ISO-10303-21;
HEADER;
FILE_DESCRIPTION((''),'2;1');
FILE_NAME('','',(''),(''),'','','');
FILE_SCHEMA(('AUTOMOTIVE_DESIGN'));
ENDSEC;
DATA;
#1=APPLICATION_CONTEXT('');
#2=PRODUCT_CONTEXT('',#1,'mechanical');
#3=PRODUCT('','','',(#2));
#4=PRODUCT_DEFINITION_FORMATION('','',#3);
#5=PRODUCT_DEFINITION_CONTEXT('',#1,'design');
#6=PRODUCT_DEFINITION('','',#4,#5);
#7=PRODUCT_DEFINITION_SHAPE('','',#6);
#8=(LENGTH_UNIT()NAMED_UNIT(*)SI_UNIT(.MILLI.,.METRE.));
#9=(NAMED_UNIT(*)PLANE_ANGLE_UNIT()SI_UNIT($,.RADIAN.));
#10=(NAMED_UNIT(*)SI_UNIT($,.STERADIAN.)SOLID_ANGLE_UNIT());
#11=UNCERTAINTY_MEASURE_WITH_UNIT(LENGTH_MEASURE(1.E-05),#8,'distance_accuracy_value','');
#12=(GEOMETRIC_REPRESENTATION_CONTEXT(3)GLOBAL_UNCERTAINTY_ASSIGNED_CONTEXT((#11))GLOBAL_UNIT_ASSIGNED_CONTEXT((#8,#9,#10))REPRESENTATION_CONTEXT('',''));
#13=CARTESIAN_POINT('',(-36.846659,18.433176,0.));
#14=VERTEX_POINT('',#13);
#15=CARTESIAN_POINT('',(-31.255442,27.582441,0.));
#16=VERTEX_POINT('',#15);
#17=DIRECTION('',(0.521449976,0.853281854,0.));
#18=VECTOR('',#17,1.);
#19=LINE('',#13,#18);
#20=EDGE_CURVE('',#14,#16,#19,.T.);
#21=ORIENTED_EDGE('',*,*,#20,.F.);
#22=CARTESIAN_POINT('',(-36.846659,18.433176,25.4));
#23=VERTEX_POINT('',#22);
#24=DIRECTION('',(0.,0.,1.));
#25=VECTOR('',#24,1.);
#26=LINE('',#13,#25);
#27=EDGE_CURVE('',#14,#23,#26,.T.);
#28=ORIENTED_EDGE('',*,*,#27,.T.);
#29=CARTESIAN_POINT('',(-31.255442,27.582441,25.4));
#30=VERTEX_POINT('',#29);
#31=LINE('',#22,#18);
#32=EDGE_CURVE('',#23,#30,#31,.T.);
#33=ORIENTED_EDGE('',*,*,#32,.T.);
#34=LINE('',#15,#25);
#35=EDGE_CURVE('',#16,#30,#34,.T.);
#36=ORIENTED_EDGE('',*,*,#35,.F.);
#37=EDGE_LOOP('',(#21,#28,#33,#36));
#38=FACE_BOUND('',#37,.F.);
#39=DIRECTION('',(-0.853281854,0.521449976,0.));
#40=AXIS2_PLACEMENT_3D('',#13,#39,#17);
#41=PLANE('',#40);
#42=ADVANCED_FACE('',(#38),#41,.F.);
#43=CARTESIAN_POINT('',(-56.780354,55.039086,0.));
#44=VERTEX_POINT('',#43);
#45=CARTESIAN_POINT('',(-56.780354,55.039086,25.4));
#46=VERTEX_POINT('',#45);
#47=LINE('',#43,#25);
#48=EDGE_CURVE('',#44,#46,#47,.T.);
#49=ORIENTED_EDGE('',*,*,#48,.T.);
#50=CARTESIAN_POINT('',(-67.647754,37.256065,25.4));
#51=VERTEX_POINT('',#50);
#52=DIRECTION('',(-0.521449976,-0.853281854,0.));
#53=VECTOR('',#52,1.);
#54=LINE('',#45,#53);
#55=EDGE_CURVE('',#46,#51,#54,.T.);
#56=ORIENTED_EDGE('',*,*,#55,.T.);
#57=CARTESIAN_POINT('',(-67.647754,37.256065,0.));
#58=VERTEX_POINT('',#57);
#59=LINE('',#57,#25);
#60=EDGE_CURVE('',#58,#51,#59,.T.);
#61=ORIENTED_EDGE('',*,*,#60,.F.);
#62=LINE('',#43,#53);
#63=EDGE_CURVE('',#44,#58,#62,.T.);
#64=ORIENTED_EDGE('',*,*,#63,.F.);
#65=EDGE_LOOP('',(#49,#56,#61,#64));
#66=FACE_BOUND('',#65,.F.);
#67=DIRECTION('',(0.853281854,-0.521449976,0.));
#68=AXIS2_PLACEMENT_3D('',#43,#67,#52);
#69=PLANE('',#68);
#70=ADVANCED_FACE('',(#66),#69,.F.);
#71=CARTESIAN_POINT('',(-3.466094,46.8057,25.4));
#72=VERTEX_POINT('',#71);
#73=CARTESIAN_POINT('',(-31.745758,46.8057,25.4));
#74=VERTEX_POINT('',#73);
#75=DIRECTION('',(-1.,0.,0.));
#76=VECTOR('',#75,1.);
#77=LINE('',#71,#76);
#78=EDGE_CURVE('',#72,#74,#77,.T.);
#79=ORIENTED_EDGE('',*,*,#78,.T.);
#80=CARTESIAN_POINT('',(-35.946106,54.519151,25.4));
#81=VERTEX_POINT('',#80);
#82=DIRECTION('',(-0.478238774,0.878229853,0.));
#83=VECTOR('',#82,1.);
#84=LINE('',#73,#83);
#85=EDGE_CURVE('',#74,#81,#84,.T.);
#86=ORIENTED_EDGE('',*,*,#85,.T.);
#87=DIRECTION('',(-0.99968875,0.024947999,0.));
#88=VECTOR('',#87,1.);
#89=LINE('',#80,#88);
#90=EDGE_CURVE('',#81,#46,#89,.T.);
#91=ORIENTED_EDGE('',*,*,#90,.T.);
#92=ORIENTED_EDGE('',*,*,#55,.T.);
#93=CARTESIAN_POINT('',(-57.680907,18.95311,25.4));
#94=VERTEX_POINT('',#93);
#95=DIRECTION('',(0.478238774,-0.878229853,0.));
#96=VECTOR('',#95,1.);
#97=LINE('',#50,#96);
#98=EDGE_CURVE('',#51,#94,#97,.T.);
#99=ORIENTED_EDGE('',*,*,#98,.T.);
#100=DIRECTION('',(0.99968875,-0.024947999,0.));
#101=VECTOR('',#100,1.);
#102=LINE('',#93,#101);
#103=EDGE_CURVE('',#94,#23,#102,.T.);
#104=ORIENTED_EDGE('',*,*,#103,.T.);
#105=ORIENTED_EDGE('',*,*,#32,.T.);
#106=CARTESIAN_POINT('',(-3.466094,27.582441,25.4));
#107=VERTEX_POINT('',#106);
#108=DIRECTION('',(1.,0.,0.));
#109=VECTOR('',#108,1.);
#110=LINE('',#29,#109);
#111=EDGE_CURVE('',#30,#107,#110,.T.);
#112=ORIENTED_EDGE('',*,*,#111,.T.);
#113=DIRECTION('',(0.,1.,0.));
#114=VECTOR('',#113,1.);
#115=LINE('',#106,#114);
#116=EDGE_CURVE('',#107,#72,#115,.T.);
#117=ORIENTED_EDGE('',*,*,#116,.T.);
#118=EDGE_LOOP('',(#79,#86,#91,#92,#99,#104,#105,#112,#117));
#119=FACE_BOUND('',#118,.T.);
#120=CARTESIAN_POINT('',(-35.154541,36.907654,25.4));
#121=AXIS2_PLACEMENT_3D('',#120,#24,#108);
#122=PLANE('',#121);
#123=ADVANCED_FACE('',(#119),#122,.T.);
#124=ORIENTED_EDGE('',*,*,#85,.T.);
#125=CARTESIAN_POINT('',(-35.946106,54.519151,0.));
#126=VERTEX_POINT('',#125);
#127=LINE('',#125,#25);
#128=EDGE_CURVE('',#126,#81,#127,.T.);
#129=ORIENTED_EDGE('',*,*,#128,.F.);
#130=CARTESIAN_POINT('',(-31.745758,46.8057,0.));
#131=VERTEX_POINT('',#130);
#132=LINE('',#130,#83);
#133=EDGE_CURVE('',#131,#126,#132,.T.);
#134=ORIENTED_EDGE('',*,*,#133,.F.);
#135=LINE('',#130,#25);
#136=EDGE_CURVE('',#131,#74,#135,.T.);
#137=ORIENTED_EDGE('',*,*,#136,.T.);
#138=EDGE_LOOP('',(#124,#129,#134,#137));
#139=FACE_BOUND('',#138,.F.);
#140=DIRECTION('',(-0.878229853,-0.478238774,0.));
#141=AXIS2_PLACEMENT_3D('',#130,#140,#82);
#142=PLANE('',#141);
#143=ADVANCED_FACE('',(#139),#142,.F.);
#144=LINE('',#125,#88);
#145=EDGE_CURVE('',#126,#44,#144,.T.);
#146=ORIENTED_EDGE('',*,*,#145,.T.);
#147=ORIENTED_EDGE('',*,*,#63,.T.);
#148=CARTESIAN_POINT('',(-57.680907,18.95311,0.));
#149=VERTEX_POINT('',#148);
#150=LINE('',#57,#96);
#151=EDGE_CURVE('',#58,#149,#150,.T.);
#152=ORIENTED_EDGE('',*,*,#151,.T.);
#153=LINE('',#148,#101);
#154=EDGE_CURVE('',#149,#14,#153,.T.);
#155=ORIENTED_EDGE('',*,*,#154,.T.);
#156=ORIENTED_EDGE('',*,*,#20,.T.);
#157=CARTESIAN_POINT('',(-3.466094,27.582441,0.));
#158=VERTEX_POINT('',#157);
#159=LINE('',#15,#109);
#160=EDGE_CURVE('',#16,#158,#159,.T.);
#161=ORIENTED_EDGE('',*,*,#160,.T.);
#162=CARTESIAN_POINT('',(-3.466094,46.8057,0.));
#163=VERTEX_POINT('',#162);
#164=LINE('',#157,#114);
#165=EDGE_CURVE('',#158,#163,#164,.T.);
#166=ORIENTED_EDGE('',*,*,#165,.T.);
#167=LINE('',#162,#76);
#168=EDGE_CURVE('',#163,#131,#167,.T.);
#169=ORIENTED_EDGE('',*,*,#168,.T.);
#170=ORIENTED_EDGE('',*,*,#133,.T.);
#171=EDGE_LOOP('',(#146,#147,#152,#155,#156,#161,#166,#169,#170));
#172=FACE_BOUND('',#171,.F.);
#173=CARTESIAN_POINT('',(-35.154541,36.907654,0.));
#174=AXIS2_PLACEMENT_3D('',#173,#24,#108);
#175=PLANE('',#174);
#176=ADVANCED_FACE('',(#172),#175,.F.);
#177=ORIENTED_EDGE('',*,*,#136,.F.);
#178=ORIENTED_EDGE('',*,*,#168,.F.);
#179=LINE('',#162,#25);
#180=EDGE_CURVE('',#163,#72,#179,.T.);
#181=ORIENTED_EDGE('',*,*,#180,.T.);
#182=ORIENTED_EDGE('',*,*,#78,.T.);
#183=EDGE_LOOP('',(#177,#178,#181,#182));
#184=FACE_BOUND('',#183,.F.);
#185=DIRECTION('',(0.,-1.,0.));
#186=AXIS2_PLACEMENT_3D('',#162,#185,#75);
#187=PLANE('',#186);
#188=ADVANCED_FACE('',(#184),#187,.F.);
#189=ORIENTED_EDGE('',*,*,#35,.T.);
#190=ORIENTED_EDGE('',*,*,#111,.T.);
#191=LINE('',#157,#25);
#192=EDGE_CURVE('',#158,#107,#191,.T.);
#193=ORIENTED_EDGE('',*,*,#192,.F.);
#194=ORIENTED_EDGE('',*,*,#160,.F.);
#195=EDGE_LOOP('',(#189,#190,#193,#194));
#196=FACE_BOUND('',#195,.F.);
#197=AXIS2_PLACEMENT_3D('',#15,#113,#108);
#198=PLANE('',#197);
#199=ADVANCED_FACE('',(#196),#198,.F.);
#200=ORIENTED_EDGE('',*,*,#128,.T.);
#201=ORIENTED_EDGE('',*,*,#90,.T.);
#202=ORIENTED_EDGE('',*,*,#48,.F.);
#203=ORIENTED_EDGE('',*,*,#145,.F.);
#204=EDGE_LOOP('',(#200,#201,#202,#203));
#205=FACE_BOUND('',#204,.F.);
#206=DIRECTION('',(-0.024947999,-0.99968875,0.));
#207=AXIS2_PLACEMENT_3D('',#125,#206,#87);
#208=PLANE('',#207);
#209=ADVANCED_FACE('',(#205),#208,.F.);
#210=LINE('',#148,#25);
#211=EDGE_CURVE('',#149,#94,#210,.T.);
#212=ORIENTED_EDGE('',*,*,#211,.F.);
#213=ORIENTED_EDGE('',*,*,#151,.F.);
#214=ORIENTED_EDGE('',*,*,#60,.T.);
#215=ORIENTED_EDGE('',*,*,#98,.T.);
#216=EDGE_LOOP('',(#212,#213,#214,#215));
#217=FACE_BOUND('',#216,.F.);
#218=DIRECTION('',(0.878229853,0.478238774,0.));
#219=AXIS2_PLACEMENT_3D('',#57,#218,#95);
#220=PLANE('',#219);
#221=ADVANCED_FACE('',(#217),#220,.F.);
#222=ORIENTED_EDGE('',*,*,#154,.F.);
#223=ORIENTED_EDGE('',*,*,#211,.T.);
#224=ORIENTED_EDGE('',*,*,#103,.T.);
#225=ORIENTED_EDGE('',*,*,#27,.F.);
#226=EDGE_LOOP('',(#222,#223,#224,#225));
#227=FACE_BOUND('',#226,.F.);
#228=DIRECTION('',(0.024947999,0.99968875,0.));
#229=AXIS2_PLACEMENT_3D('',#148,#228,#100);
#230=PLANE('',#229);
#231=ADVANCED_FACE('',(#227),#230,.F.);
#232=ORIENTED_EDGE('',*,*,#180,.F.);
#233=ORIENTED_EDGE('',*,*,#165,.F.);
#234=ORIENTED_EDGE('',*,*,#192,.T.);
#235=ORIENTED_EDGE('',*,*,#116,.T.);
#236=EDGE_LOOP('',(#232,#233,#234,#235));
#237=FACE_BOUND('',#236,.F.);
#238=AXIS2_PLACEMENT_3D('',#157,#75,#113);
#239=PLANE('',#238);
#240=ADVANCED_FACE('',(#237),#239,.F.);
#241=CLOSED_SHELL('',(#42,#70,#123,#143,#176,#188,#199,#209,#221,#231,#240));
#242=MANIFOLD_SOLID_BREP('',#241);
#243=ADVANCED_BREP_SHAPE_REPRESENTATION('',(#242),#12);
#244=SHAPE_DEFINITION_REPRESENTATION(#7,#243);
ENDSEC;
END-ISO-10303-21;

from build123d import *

# Parameters (mm, degrees)
F1_DEPTH = 25.4


# Not quite as in the source:
# - a feature of the source that left no trace in its solid (it failed there, or was rolled back) is left out


with BuildPart() as f1:
    # F0 (on Top) → F1 (new body)
    with BuildSketch(Plane.XY):
        Polygon((-36.8466593381, 18.4331755623), (-31.2554423525, 27.5824405253), (-3.4660941456, 27.5824405253), (-3.4660941456, 46.8057003116), (-31.7457578, 46.8057003116), (-35.9461061545, 54.5191512435), (-56.780353928, 55.0390858665), (-67.6477544065, 37.2560653374), (-57.6809071116, 18.9531101853), align=None)
    extrude(amount=F1_DEPTH)


solid = f1.part
